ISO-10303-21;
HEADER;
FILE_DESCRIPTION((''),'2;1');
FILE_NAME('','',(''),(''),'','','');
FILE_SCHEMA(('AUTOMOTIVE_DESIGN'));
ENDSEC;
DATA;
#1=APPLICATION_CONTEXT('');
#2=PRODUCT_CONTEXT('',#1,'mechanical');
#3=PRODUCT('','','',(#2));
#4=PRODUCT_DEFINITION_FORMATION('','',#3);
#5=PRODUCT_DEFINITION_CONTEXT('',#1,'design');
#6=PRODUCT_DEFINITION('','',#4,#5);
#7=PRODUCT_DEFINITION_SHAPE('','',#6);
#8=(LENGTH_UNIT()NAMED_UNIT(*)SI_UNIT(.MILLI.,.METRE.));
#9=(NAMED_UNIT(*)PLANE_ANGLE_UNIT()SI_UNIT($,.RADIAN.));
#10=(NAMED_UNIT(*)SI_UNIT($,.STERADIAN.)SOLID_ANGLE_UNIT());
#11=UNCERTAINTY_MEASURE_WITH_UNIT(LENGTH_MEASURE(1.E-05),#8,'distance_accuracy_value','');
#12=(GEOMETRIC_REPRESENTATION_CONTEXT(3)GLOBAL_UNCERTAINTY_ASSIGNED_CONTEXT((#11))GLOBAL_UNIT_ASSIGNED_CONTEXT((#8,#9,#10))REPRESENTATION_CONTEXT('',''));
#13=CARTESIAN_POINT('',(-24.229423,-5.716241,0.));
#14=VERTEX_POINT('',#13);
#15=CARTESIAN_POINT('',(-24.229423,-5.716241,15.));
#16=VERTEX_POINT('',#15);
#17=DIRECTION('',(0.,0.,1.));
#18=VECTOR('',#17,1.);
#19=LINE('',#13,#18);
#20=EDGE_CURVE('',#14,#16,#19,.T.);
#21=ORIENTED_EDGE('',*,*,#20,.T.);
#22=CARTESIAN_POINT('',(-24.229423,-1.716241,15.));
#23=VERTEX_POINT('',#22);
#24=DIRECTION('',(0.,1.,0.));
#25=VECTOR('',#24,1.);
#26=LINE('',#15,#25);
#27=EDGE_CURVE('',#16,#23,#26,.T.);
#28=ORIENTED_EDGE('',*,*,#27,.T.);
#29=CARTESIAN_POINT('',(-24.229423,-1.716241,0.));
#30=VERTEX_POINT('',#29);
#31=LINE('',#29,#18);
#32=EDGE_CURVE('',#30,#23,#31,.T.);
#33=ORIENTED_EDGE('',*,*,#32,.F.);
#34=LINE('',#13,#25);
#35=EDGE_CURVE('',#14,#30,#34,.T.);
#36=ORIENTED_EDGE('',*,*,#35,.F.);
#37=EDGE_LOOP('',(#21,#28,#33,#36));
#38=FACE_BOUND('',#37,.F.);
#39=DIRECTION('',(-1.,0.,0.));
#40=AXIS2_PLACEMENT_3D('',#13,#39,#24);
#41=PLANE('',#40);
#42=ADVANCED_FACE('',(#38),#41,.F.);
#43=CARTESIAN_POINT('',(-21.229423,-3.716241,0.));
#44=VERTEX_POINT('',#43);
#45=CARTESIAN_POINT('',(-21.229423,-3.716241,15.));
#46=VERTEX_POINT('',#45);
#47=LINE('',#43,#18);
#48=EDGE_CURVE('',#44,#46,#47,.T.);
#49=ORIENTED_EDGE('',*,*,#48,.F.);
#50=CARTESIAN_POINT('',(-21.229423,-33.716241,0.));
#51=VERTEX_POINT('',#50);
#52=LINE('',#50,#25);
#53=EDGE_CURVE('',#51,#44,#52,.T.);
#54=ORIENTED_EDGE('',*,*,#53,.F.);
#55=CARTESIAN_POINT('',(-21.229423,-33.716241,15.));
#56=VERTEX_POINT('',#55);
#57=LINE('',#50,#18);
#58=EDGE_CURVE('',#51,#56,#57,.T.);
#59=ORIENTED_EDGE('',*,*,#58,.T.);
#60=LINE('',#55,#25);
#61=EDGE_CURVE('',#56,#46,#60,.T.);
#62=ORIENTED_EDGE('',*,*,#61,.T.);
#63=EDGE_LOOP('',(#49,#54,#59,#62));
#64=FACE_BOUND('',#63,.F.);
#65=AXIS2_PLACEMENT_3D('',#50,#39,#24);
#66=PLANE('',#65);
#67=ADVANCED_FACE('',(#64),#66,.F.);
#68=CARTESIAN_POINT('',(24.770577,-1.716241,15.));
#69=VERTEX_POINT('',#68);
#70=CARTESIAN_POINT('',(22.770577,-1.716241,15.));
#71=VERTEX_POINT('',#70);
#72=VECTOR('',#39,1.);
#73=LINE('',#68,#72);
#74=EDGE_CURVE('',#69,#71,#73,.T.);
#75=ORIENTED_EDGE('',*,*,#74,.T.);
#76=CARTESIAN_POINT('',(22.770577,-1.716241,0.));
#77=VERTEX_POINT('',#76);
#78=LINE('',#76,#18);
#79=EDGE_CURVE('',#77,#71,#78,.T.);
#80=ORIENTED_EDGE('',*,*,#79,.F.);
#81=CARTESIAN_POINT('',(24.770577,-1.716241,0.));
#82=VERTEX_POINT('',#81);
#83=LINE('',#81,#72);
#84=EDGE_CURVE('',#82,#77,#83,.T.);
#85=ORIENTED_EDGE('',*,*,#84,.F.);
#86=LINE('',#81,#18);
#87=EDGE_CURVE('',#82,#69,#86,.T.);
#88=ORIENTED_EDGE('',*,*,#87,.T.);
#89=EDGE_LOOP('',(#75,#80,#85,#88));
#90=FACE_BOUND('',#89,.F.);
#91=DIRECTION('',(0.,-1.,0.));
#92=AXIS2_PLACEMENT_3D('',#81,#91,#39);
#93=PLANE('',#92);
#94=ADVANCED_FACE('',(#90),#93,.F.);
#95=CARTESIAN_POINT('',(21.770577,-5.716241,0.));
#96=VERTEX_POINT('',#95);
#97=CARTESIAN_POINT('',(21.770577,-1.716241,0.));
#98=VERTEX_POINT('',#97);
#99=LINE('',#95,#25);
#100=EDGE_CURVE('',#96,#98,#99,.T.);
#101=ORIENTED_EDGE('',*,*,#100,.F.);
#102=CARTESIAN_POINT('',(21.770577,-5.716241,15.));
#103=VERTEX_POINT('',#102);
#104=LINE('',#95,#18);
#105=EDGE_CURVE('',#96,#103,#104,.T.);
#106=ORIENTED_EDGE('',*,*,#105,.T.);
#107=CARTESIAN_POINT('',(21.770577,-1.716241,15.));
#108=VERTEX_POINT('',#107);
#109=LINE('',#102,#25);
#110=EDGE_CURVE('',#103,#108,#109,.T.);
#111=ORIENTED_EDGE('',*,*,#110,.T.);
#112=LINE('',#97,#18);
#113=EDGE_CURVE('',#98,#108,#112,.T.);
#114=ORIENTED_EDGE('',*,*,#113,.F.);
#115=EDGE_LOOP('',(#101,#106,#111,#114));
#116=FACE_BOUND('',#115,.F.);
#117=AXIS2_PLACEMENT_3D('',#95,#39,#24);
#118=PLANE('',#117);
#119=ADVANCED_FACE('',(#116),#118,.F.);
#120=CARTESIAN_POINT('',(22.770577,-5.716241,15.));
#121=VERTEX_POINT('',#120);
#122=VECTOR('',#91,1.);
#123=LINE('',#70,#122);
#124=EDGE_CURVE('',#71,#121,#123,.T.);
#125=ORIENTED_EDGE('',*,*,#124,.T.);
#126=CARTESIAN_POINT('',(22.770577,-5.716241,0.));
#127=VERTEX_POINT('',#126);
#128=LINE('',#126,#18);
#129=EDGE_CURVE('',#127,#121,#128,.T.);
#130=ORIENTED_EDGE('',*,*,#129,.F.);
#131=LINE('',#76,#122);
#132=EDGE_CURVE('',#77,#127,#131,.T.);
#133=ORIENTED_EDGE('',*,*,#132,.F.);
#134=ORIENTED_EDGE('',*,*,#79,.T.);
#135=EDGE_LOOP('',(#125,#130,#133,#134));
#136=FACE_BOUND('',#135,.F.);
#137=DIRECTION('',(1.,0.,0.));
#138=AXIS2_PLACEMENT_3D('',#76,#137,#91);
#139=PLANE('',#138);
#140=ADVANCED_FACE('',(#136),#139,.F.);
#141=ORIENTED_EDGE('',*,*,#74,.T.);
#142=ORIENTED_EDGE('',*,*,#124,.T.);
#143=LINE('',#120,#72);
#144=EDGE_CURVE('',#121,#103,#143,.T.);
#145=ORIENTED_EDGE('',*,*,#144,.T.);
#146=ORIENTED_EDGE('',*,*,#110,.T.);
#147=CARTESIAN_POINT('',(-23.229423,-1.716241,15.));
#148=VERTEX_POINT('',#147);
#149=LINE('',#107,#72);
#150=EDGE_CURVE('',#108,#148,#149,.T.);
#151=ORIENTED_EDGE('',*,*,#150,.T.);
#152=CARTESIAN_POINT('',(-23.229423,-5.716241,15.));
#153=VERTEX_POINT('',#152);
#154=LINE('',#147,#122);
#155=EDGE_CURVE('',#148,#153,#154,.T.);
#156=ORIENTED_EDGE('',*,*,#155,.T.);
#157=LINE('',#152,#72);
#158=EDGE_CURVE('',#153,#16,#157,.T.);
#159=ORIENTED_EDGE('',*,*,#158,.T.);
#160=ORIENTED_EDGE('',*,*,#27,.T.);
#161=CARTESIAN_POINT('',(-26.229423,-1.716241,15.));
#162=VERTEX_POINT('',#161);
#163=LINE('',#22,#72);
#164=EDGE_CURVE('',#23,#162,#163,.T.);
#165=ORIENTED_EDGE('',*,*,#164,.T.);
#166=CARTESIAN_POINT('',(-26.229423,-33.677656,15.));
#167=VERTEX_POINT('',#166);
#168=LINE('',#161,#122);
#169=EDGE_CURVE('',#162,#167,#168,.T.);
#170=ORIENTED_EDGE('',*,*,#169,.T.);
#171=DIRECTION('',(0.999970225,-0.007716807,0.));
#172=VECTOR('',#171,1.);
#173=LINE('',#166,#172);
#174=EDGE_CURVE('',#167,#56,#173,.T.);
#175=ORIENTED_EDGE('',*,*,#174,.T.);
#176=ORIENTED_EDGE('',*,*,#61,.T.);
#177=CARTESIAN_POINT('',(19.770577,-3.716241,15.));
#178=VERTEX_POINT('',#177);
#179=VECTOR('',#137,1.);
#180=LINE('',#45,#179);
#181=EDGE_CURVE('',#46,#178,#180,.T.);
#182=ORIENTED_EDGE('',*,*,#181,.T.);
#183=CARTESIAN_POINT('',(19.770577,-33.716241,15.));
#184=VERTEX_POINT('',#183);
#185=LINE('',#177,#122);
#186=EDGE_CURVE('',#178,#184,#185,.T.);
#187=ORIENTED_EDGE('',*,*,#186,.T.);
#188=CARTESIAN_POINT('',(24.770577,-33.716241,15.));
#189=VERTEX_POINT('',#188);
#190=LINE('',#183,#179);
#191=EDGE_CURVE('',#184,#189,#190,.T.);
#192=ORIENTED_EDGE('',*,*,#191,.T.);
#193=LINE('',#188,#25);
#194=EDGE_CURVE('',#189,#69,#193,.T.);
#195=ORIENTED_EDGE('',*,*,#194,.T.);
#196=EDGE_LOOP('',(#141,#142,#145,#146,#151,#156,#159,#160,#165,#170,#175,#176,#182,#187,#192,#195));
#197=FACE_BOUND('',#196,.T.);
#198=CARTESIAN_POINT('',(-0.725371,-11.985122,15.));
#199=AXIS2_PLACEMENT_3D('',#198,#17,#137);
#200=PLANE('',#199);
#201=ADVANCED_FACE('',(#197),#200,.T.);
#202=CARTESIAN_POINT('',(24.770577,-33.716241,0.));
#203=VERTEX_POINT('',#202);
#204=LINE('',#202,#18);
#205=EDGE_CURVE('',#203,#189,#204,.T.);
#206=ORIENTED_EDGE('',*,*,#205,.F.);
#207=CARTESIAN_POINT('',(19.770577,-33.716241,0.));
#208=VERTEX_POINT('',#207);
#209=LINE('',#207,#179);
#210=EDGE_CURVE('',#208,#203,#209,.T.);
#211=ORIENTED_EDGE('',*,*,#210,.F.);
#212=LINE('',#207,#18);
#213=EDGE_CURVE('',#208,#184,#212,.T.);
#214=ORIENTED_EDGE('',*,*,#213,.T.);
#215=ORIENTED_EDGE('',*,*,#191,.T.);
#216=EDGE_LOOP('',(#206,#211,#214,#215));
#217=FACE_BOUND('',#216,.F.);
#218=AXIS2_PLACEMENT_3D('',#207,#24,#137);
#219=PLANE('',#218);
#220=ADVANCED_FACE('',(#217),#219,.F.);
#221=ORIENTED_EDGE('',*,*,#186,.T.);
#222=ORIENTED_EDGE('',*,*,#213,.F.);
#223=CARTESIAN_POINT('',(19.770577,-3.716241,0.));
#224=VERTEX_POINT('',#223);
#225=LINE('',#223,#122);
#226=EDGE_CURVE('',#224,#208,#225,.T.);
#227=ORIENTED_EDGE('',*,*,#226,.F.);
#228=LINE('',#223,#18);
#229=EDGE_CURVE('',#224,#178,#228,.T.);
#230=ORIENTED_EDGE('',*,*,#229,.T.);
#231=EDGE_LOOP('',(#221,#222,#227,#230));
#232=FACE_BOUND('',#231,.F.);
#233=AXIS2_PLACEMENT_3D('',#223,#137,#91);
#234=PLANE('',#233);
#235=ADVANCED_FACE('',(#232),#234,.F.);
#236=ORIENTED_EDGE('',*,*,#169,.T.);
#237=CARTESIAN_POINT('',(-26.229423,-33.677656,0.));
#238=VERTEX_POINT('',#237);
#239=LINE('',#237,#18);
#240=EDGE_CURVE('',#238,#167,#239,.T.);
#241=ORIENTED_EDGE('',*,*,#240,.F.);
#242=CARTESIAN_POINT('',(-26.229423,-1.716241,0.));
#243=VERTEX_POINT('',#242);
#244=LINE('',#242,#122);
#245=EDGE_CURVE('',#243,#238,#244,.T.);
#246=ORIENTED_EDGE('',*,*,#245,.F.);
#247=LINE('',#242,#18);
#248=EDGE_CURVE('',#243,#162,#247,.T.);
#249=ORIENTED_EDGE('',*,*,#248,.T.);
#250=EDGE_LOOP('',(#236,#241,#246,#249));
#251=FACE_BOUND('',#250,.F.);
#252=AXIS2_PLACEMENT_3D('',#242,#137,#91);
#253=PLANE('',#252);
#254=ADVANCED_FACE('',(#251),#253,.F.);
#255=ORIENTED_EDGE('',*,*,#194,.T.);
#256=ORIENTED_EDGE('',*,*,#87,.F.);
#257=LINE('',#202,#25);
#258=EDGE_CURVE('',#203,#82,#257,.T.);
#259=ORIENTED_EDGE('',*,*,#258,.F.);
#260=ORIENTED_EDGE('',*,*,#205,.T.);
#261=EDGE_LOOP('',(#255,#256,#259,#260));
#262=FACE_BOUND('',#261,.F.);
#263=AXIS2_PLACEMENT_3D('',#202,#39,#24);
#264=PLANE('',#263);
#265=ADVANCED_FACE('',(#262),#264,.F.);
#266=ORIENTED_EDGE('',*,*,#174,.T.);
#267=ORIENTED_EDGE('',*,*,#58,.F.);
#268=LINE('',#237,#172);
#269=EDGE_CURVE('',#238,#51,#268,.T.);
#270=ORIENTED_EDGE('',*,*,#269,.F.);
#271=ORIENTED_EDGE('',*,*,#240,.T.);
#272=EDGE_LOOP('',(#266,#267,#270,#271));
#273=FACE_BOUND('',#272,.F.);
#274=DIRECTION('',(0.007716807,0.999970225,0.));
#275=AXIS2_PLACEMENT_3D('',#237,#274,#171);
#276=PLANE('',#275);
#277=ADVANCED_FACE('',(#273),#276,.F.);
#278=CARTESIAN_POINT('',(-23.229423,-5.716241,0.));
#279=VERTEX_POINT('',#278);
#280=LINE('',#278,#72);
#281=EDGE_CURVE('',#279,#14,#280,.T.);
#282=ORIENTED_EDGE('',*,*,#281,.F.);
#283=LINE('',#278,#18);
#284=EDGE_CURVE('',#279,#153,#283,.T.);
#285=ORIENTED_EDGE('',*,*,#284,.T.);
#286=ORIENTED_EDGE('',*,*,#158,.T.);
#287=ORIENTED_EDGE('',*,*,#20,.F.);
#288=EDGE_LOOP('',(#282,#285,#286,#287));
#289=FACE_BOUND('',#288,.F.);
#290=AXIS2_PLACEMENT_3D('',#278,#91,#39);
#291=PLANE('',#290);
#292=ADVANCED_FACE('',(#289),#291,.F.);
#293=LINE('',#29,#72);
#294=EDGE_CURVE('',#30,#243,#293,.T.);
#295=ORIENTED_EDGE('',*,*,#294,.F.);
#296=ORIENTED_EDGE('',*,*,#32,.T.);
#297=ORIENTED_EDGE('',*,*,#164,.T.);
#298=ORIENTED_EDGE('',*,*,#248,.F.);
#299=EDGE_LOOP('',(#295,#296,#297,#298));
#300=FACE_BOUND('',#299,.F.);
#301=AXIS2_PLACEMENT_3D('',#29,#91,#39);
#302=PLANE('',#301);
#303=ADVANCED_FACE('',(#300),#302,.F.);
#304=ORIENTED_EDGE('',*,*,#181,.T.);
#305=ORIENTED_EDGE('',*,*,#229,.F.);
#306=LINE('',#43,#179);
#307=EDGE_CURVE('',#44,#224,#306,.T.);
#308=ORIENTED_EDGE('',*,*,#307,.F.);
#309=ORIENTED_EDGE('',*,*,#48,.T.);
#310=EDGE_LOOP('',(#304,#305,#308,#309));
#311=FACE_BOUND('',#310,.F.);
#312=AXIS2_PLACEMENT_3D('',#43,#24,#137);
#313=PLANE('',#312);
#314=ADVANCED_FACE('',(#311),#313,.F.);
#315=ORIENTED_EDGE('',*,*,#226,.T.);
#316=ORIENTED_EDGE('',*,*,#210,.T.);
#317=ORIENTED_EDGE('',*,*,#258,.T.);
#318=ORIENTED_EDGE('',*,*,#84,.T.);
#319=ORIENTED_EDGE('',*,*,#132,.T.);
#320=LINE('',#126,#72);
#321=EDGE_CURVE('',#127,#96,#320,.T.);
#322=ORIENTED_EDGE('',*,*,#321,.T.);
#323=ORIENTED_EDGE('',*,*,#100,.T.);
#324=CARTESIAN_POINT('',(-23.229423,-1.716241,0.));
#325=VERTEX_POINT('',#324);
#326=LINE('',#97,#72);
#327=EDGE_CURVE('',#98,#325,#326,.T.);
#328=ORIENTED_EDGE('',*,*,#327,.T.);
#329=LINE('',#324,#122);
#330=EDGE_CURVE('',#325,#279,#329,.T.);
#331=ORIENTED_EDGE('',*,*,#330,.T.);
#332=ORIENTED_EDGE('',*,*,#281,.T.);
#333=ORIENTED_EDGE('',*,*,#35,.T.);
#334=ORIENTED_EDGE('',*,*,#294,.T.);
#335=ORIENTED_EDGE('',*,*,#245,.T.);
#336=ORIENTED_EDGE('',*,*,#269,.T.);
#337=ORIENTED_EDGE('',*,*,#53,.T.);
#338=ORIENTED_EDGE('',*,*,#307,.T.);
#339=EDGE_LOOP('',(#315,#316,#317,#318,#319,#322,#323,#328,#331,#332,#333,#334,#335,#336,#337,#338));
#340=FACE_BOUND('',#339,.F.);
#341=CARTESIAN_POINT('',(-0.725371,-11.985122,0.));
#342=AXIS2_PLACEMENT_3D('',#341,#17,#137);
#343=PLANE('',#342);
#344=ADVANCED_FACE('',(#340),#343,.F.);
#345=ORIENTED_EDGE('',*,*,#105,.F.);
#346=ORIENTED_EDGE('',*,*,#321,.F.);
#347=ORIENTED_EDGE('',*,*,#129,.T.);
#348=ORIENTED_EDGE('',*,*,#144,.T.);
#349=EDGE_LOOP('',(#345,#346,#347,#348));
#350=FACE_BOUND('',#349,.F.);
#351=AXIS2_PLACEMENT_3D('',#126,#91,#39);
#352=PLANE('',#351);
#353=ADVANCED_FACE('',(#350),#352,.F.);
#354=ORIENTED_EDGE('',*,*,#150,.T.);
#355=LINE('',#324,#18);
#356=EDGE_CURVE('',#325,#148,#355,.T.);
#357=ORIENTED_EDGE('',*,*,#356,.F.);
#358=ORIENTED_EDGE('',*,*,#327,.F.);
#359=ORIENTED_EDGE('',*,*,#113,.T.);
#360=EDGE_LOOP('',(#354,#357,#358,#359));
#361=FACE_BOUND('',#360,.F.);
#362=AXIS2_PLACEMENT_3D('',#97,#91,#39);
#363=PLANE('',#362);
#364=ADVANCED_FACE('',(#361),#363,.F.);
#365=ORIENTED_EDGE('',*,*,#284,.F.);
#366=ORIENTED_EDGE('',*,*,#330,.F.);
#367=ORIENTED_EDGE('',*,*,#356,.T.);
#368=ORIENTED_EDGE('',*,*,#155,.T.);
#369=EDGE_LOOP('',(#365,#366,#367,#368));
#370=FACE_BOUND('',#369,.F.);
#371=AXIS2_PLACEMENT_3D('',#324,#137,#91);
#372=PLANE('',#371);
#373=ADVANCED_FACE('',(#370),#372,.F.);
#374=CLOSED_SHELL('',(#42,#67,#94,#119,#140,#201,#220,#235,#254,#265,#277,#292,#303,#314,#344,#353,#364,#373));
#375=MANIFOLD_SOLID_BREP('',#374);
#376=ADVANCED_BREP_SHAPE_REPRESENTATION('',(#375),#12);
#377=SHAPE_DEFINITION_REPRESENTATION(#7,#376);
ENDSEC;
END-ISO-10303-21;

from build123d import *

# Parameters (mm, degrees)
F1_DEPTH = 15


# Not quite as in the source:
# - a feature names something its author has since deleted; it is built from what else it names


with BuildPart() as f1:
    # F0 (on Top) → F1 (new body)
    with BuildSketch(Plane.XY):
        Polygon((-21.2294230163, -33.7162413895), (-21.2294230163, -3.7162413895), (19.7705769837, -3.7162413895), (19.7705769837, -33.7162413895), (24.7705769837, -33.7162413895), (24.7705769837, -1.7162413895), (22.7705769837, -1.7162413895), (22.7705769837, -5.7162413895), (21.7705769837, -5.7162413895), (21.7705769837, -1.7162413895), (-23.2294230163, -1.7162413895), (-23.2294230163, -5.7162413895), (-24.2294230163, -5.7162413895), (-24.2294230163, -1.7162413895), (-26.2294230163, -1.7162413895), (-26.2294230163, -33.6776562035), align=None)
    extrude(amount=F1_DEPTH)


solid = f1.part
